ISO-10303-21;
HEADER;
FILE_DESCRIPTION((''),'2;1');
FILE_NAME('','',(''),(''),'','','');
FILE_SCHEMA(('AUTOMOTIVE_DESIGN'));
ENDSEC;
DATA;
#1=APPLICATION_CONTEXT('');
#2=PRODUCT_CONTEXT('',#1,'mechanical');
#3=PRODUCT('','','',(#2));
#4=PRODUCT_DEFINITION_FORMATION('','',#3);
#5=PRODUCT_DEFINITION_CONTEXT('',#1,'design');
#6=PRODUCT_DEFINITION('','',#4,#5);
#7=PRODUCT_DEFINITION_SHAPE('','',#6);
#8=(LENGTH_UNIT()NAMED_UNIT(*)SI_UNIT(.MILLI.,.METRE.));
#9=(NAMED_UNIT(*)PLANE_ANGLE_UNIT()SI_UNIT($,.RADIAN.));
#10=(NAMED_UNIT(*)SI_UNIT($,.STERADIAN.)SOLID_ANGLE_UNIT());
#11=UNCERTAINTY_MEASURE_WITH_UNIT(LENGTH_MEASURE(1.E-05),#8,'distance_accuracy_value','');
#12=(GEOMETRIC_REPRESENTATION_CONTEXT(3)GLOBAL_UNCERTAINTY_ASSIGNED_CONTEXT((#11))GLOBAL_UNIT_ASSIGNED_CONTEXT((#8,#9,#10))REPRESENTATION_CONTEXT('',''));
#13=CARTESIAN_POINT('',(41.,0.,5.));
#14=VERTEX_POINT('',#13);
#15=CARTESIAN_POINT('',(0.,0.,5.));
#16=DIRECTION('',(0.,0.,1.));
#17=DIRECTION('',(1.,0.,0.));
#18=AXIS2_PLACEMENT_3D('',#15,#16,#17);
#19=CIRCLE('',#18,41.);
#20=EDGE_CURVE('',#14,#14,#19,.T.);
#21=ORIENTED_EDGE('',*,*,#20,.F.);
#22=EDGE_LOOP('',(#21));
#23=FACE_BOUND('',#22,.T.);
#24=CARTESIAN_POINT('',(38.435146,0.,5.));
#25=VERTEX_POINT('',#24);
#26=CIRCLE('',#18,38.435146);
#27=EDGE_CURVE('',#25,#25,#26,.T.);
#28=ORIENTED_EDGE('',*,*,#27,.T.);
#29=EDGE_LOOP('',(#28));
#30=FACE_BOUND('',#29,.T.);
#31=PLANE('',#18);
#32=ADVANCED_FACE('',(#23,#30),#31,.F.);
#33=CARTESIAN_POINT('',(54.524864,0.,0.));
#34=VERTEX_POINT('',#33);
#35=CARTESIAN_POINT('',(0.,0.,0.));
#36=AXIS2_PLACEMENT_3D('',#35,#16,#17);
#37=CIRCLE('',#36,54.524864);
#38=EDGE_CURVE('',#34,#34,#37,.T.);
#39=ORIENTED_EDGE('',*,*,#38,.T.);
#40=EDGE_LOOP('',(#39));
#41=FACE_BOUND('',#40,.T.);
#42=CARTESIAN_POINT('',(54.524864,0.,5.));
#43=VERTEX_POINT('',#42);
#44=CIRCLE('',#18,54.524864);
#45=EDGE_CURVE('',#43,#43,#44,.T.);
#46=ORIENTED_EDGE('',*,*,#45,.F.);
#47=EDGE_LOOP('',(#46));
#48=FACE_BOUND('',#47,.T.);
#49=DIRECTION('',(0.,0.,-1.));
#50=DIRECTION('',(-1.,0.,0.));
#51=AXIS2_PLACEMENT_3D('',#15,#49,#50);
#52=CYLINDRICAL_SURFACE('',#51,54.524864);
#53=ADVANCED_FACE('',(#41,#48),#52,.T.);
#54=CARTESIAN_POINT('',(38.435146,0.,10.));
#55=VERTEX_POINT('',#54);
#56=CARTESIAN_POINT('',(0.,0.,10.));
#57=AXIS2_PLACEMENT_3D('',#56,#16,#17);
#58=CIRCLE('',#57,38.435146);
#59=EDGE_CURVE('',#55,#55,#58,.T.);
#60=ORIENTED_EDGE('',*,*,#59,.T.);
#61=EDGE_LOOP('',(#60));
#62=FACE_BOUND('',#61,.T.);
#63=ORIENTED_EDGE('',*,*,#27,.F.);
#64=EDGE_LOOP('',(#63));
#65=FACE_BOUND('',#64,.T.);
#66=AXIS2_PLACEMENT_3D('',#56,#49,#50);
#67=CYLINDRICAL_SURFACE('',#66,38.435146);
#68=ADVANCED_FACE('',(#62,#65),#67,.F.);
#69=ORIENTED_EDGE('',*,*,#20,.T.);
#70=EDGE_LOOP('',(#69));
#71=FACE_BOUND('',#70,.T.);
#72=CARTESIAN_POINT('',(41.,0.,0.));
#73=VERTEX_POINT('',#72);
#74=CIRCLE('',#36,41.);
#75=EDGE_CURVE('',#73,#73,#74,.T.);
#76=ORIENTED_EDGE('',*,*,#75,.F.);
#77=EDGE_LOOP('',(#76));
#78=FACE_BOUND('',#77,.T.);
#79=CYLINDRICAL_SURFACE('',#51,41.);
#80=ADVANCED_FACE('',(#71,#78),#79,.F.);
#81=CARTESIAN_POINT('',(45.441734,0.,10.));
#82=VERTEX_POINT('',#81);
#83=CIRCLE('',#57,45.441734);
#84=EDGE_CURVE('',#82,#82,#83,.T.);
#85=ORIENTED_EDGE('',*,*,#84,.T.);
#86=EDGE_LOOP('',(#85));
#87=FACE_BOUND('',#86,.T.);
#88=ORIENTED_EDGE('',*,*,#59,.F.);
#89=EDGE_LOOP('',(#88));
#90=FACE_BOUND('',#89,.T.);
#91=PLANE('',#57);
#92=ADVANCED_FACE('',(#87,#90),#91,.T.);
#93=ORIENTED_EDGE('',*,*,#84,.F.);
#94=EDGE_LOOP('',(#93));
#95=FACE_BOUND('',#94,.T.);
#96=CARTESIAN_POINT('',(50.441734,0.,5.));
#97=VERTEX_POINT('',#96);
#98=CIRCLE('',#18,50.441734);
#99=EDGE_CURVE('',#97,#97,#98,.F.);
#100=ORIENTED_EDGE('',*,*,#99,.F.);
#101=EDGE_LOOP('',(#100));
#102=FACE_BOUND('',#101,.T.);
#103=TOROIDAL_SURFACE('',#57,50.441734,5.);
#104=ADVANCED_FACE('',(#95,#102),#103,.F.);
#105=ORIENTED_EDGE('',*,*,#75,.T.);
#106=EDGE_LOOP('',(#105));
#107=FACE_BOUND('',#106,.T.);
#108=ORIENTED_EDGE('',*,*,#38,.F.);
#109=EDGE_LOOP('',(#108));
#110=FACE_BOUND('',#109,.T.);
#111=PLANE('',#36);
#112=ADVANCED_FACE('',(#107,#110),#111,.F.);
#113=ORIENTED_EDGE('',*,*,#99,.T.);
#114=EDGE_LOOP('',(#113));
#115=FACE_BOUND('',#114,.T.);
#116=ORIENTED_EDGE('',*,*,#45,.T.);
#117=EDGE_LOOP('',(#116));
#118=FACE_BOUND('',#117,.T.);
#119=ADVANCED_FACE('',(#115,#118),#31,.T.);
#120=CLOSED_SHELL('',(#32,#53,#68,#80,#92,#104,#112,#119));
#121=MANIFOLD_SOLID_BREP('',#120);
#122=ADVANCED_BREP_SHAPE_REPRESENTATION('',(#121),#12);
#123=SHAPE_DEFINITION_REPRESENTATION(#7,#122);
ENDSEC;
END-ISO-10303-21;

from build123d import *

# Parameters (mm, degrees)
SKETCH1_R           = 54.524863565
SKETCH1_R_2         = 41
BOSS_EXTRUDE1_DEPTH = 5
SKETCH2_R           = 45.441734001
SKETCH2_R_2         = 38.435146228
BOSS_EXTRUDE2_DEPTH = 5
FILLET1_R           = 5


with BuildPart() as part:
    # Sketch1 → Boss-Extrude1 (new body)
    with BuildSketch(Plane.XY):
        Circle(SKETCH1_R)
        Circle(SKETCH1_R_2, mode=Mode.SUBTRACT)
    extrude(amount=BOSS_EXTRUDE1_DEPTH)

    # Sketch2 → Boss-Extrude2 (add)
    with BuildSketch(Plane.XY.offset(5)):
        Circle(SKETCH2_R)
        Circle(SKETCH2_R_2, mode=Mode.SUBTRACT)
    extrude(amount=BOSS_EXTRUDE2_DEPTH)

    # Fillet1
    fillet1_edges = [part.edges().sort_by_distance(p)[0] for p in [
        (-45.441734001, 0, 5),
    ]]
    fillet(fillet1_edges, radius=FILLET1_R - 0.0001)  # a hair under: the kernel refuses the full size


solid = part.part
